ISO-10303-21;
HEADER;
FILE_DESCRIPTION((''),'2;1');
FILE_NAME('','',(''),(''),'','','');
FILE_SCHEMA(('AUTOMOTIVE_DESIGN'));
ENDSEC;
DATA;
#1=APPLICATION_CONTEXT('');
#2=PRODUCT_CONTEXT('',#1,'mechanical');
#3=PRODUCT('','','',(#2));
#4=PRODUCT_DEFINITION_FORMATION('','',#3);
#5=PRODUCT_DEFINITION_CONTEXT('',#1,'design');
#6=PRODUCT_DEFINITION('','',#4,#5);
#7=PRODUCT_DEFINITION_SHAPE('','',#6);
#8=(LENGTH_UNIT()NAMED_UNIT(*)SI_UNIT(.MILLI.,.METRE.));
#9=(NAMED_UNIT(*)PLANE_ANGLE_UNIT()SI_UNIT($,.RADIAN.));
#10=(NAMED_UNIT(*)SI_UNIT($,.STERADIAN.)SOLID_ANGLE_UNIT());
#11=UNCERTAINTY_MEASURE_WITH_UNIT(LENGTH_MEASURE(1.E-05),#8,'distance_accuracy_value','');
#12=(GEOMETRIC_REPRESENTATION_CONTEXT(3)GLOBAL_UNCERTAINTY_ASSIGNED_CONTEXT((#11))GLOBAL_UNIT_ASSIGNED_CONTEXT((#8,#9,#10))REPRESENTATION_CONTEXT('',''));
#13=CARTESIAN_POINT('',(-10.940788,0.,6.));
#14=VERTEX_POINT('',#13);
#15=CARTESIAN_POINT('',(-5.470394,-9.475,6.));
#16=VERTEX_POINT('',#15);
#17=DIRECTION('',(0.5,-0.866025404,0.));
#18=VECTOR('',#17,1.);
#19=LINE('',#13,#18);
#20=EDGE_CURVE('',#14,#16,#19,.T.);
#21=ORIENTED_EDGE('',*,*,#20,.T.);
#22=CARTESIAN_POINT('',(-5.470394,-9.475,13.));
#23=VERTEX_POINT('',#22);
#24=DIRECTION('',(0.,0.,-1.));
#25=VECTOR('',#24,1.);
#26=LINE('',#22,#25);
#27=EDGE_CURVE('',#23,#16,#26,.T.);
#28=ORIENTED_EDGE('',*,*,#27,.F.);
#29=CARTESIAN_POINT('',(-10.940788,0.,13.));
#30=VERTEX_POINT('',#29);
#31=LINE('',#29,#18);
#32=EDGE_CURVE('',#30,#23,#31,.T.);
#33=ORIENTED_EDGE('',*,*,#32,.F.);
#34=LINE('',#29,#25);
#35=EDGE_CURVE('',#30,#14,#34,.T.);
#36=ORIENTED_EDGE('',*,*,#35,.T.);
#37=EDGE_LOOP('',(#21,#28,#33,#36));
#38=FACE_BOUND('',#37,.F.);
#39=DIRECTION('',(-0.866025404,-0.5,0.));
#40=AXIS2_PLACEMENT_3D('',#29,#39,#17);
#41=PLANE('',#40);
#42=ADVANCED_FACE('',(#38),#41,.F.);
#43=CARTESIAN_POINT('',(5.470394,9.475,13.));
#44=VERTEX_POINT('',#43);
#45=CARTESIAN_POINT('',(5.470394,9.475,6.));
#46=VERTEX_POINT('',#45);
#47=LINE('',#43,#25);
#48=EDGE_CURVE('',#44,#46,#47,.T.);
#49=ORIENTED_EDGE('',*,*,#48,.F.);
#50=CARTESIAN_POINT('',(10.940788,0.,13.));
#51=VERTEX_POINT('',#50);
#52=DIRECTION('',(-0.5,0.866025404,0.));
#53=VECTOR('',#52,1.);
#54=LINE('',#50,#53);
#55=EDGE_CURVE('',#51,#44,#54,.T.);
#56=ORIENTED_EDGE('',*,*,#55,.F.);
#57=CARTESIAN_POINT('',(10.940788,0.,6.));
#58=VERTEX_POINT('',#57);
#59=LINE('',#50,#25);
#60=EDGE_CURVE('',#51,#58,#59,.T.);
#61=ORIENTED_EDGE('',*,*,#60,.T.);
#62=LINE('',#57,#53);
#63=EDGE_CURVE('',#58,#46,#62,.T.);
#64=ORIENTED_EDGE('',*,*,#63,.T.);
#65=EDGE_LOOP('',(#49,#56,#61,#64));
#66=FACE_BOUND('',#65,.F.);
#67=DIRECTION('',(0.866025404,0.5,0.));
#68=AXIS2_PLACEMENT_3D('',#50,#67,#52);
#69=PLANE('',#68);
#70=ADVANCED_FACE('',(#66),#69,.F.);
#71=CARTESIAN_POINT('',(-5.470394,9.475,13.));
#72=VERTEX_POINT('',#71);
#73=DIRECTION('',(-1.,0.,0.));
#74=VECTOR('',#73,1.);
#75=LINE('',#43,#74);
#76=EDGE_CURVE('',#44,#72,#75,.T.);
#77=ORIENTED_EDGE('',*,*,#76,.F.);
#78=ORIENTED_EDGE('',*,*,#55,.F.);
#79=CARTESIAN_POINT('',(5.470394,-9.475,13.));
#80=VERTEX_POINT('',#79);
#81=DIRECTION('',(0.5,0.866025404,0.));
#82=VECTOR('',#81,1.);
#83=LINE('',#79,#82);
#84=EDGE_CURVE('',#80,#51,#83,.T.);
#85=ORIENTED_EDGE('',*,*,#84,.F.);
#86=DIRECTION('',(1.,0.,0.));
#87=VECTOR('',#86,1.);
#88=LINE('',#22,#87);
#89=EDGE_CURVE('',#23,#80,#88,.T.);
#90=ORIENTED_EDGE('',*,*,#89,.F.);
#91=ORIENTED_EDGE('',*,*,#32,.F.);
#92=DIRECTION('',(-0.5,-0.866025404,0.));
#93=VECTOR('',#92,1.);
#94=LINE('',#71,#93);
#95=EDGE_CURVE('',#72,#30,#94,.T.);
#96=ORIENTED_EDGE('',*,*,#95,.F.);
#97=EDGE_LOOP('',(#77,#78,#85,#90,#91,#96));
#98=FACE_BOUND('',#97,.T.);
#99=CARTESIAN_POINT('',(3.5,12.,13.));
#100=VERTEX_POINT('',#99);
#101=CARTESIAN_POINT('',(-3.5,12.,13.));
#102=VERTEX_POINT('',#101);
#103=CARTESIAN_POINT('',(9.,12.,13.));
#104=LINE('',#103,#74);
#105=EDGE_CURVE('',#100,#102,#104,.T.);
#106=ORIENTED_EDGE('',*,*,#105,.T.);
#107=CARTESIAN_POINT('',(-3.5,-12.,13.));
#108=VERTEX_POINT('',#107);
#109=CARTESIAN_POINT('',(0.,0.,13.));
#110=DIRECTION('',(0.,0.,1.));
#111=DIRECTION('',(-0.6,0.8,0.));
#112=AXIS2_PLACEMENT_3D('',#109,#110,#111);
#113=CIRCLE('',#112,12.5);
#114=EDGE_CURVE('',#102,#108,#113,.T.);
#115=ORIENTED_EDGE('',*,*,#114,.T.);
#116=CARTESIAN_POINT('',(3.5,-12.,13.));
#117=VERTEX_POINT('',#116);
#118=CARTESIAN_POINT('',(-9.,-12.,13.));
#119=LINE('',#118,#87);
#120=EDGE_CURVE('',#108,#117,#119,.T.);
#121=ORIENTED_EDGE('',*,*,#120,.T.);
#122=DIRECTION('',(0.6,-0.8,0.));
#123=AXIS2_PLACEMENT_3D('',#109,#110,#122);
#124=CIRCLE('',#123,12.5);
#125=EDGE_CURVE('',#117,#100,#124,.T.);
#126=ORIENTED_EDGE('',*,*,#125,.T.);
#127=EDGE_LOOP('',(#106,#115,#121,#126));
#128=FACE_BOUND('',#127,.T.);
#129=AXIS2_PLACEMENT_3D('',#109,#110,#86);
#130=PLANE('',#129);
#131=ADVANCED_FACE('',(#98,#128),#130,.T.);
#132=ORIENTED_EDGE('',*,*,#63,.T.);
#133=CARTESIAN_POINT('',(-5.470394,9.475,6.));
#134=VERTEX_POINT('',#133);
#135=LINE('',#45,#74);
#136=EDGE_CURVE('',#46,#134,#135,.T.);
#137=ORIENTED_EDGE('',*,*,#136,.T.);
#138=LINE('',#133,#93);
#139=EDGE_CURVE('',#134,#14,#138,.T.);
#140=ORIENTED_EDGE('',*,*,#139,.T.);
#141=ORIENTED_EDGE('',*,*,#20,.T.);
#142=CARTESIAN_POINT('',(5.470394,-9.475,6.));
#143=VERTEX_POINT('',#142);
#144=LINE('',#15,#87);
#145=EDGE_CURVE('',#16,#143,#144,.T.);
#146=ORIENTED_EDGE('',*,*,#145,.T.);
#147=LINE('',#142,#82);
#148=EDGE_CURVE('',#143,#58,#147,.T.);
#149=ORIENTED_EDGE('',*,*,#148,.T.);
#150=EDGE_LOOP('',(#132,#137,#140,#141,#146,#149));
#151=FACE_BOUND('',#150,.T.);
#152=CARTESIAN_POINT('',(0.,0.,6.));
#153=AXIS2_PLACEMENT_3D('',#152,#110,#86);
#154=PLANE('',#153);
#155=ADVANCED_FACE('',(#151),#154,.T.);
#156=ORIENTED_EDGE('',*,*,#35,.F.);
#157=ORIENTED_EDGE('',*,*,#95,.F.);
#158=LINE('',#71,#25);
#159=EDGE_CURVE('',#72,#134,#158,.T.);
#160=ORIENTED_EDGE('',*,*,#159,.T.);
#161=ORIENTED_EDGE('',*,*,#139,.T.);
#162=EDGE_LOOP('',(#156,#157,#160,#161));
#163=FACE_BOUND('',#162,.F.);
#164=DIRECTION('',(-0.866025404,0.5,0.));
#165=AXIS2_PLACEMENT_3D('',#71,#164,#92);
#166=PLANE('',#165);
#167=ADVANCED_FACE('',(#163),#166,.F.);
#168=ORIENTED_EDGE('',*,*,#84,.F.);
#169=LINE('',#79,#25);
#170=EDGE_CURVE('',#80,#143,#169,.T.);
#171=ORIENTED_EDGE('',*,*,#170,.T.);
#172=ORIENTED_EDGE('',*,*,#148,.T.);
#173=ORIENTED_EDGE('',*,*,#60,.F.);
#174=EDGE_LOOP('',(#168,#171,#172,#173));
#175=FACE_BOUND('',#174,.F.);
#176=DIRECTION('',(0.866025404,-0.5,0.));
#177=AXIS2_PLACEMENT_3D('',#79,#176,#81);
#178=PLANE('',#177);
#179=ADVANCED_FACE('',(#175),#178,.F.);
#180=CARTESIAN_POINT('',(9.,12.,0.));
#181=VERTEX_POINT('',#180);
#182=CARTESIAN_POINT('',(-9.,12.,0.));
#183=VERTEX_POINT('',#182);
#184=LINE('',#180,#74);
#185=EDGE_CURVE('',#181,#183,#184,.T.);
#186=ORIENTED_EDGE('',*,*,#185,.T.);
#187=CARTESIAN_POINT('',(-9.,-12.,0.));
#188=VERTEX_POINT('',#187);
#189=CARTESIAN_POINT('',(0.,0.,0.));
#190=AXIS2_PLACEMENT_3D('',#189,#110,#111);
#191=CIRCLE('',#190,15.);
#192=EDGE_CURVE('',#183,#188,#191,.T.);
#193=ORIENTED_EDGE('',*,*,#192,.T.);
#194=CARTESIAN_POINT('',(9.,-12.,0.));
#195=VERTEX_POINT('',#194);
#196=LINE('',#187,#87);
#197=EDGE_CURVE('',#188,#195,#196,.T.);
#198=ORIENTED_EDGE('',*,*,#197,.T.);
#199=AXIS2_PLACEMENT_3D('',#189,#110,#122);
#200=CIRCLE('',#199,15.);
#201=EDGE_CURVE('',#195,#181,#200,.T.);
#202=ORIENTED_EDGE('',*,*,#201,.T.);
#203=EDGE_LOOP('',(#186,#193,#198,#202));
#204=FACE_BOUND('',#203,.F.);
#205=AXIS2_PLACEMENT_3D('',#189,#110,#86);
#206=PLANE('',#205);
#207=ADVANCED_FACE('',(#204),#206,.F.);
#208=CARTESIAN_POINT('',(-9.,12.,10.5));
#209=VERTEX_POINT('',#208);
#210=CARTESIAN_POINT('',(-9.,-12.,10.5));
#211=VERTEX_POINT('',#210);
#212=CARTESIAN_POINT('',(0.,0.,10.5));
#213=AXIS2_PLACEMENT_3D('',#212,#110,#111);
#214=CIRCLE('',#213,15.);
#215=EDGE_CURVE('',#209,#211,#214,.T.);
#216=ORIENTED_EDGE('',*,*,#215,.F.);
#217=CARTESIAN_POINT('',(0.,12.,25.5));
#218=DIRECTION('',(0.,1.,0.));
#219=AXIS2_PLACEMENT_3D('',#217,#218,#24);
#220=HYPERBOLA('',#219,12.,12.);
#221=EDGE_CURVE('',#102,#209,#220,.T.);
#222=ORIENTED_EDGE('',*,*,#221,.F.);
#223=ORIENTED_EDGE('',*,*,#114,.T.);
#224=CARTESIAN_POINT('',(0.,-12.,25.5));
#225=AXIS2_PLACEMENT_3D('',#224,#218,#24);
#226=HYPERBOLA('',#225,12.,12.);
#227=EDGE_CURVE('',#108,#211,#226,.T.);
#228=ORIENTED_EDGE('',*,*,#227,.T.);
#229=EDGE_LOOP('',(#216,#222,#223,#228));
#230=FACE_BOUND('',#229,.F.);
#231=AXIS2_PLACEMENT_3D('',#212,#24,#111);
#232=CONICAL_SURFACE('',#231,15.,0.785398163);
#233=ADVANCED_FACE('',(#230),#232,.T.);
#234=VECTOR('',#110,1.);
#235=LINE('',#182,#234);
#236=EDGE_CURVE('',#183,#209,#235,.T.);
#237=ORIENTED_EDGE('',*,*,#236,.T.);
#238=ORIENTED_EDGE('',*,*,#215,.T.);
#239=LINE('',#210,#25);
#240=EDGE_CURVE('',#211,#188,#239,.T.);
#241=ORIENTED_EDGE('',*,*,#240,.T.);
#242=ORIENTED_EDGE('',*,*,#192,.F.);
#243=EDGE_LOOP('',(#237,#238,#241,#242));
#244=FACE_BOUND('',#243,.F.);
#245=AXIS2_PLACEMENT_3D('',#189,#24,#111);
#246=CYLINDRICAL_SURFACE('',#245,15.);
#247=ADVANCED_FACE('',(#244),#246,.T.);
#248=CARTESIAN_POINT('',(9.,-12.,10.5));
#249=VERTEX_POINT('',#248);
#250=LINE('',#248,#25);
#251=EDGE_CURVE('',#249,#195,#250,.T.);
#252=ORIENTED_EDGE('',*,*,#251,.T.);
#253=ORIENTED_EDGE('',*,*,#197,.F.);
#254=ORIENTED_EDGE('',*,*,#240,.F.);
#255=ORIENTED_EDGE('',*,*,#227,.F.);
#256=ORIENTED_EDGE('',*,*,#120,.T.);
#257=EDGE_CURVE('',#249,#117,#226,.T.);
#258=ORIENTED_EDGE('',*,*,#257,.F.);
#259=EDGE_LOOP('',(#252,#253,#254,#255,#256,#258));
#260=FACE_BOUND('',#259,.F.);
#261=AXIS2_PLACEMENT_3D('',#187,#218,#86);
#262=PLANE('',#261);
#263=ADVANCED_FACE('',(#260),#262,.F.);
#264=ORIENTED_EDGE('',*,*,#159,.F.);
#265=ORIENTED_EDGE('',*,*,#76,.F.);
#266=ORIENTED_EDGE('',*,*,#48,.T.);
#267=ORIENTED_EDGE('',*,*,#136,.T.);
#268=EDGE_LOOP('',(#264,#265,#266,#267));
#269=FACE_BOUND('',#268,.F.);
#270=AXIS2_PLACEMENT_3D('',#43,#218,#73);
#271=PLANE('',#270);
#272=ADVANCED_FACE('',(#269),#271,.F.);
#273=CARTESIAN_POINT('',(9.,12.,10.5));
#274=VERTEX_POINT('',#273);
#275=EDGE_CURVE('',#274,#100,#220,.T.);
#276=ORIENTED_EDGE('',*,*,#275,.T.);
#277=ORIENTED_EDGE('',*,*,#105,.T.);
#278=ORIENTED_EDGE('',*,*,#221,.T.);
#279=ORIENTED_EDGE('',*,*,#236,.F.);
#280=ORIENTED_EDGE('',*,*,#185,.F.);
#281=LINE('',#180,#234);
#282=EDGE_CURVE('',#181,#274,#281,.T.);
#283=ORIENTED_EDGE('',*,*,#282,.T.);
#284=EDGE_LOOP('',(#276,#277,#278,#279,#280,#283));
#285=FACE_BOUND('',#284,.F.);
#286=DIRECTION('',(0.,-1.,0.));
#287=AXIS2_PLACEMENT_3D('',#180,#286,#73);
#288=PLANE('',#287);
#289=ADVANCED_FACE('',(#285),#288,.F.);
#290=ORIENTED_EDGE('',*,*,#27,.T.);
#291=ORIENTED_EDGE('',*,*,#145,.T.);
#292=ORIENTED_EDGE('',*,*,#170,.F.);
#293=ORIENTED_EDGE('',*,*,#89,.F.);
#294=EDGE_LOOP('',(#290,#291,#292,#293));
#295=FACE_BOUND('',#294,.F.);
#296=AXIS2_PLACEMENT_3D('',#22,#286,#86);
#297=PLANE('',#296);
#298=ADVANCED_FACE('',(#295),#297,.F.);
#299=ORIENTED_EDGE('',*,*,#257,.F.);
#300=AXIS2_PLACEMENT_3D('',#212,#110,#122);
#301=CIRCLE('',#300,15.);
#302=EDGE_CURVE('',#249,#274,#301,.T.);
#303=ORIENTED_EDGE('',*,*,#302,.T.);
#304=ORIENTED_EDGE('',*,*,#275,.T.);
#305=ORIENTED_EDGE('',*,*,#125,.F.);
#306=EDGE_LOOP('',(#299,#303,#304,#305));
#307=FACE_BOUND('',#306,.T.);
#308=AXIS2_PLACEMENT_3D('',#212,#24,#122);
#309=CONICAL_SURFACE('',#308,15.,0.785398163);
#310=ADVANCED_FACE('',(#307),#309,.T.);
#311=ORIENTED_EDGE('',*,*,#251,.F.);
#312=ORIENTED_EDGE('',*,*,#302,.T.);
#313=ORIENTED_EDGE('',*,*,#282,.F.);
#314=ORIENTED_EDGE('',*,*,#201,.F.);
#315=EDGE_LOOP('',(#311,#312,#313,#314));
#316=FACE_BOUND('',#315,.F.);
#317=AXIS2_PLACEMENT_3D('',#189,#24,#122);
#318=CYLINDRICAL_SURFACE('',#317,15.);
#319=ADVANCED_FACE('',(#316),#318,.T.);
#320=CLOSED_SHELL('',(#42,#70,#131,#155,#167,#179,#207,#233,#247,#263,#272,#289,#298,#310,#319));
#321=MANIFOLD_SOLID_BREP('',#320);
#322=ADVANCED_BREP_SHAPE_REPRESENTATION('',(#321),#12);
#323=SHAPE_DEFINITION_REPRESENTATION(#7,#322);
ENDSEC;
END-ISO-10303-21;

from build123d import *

# Parameters (mm, degrees)
F1_DEPTH = 13
F3_DEPTH = 7
F4_SIZE  = 2.5
F5_DEPTH = 2


# Not quite as in the source:
# - a feature names something its author has since deleted; it is built from what else it names


with BuildPart() as f1:
    # F0 (on Top) → F1 (new body)
    with BuildSketch(Plane.XY):
        with BuildLine():
            ThreePointArc((9, -12), (13.416407865, -6.7082039325), (15, 0))
            ThreePointArc((15, 0), (13.416407865, 6.7082039325), (9, 12))
            Line((9, 12), (-9, 12))
            ThreePointArc((-9, 12), (-15, 0), (-9, -12))
            Line((-9, -12), (9, -12))
        make_face()
    extrude(amount=F1_DEPTH)

    # F2 (on face) → F3 (cut)
    with BuildSketch(Plane.XY.offset(13)):
        Polygon((5.4703938006, -9.475), (10.9407876011, 0), (5.4703938006, 9.475), (-5.4703938006, 9.475), (-10.9407876011, 0), (-5.4703938006, -9.475), align=None)
    extrude(amount=-F3_DEPTH, mode=Mode.SUBTRACT)

    # F4
    f4_edges = [f1.edges().sort_by_distance(p)[0] for p in [
        (15, 0, 13),
        (-15, 0, 13),
    ]]
    chamfer(f4_edges, length=F4_SIZE)

    # F0 (on Top) → F5 (join)
    with BuildSketch(Plane.XY):
        with BuildLine():
            ThreePointArc((9, -12), (13.416407865, -6.7082039325), (15, 0))
            ThreePointArc((15, 0), (13.416407865, 6.7082039325), (9, 12))
            Line((9, 12), (-9, 12))
            ThreePointArc((-9, 12), (-15, 0), (-9, -12))
            Line((-9, -12), (9, -12))
        make_face()
    extrude(amount=F5_DEPTH)


solid = f1.part
